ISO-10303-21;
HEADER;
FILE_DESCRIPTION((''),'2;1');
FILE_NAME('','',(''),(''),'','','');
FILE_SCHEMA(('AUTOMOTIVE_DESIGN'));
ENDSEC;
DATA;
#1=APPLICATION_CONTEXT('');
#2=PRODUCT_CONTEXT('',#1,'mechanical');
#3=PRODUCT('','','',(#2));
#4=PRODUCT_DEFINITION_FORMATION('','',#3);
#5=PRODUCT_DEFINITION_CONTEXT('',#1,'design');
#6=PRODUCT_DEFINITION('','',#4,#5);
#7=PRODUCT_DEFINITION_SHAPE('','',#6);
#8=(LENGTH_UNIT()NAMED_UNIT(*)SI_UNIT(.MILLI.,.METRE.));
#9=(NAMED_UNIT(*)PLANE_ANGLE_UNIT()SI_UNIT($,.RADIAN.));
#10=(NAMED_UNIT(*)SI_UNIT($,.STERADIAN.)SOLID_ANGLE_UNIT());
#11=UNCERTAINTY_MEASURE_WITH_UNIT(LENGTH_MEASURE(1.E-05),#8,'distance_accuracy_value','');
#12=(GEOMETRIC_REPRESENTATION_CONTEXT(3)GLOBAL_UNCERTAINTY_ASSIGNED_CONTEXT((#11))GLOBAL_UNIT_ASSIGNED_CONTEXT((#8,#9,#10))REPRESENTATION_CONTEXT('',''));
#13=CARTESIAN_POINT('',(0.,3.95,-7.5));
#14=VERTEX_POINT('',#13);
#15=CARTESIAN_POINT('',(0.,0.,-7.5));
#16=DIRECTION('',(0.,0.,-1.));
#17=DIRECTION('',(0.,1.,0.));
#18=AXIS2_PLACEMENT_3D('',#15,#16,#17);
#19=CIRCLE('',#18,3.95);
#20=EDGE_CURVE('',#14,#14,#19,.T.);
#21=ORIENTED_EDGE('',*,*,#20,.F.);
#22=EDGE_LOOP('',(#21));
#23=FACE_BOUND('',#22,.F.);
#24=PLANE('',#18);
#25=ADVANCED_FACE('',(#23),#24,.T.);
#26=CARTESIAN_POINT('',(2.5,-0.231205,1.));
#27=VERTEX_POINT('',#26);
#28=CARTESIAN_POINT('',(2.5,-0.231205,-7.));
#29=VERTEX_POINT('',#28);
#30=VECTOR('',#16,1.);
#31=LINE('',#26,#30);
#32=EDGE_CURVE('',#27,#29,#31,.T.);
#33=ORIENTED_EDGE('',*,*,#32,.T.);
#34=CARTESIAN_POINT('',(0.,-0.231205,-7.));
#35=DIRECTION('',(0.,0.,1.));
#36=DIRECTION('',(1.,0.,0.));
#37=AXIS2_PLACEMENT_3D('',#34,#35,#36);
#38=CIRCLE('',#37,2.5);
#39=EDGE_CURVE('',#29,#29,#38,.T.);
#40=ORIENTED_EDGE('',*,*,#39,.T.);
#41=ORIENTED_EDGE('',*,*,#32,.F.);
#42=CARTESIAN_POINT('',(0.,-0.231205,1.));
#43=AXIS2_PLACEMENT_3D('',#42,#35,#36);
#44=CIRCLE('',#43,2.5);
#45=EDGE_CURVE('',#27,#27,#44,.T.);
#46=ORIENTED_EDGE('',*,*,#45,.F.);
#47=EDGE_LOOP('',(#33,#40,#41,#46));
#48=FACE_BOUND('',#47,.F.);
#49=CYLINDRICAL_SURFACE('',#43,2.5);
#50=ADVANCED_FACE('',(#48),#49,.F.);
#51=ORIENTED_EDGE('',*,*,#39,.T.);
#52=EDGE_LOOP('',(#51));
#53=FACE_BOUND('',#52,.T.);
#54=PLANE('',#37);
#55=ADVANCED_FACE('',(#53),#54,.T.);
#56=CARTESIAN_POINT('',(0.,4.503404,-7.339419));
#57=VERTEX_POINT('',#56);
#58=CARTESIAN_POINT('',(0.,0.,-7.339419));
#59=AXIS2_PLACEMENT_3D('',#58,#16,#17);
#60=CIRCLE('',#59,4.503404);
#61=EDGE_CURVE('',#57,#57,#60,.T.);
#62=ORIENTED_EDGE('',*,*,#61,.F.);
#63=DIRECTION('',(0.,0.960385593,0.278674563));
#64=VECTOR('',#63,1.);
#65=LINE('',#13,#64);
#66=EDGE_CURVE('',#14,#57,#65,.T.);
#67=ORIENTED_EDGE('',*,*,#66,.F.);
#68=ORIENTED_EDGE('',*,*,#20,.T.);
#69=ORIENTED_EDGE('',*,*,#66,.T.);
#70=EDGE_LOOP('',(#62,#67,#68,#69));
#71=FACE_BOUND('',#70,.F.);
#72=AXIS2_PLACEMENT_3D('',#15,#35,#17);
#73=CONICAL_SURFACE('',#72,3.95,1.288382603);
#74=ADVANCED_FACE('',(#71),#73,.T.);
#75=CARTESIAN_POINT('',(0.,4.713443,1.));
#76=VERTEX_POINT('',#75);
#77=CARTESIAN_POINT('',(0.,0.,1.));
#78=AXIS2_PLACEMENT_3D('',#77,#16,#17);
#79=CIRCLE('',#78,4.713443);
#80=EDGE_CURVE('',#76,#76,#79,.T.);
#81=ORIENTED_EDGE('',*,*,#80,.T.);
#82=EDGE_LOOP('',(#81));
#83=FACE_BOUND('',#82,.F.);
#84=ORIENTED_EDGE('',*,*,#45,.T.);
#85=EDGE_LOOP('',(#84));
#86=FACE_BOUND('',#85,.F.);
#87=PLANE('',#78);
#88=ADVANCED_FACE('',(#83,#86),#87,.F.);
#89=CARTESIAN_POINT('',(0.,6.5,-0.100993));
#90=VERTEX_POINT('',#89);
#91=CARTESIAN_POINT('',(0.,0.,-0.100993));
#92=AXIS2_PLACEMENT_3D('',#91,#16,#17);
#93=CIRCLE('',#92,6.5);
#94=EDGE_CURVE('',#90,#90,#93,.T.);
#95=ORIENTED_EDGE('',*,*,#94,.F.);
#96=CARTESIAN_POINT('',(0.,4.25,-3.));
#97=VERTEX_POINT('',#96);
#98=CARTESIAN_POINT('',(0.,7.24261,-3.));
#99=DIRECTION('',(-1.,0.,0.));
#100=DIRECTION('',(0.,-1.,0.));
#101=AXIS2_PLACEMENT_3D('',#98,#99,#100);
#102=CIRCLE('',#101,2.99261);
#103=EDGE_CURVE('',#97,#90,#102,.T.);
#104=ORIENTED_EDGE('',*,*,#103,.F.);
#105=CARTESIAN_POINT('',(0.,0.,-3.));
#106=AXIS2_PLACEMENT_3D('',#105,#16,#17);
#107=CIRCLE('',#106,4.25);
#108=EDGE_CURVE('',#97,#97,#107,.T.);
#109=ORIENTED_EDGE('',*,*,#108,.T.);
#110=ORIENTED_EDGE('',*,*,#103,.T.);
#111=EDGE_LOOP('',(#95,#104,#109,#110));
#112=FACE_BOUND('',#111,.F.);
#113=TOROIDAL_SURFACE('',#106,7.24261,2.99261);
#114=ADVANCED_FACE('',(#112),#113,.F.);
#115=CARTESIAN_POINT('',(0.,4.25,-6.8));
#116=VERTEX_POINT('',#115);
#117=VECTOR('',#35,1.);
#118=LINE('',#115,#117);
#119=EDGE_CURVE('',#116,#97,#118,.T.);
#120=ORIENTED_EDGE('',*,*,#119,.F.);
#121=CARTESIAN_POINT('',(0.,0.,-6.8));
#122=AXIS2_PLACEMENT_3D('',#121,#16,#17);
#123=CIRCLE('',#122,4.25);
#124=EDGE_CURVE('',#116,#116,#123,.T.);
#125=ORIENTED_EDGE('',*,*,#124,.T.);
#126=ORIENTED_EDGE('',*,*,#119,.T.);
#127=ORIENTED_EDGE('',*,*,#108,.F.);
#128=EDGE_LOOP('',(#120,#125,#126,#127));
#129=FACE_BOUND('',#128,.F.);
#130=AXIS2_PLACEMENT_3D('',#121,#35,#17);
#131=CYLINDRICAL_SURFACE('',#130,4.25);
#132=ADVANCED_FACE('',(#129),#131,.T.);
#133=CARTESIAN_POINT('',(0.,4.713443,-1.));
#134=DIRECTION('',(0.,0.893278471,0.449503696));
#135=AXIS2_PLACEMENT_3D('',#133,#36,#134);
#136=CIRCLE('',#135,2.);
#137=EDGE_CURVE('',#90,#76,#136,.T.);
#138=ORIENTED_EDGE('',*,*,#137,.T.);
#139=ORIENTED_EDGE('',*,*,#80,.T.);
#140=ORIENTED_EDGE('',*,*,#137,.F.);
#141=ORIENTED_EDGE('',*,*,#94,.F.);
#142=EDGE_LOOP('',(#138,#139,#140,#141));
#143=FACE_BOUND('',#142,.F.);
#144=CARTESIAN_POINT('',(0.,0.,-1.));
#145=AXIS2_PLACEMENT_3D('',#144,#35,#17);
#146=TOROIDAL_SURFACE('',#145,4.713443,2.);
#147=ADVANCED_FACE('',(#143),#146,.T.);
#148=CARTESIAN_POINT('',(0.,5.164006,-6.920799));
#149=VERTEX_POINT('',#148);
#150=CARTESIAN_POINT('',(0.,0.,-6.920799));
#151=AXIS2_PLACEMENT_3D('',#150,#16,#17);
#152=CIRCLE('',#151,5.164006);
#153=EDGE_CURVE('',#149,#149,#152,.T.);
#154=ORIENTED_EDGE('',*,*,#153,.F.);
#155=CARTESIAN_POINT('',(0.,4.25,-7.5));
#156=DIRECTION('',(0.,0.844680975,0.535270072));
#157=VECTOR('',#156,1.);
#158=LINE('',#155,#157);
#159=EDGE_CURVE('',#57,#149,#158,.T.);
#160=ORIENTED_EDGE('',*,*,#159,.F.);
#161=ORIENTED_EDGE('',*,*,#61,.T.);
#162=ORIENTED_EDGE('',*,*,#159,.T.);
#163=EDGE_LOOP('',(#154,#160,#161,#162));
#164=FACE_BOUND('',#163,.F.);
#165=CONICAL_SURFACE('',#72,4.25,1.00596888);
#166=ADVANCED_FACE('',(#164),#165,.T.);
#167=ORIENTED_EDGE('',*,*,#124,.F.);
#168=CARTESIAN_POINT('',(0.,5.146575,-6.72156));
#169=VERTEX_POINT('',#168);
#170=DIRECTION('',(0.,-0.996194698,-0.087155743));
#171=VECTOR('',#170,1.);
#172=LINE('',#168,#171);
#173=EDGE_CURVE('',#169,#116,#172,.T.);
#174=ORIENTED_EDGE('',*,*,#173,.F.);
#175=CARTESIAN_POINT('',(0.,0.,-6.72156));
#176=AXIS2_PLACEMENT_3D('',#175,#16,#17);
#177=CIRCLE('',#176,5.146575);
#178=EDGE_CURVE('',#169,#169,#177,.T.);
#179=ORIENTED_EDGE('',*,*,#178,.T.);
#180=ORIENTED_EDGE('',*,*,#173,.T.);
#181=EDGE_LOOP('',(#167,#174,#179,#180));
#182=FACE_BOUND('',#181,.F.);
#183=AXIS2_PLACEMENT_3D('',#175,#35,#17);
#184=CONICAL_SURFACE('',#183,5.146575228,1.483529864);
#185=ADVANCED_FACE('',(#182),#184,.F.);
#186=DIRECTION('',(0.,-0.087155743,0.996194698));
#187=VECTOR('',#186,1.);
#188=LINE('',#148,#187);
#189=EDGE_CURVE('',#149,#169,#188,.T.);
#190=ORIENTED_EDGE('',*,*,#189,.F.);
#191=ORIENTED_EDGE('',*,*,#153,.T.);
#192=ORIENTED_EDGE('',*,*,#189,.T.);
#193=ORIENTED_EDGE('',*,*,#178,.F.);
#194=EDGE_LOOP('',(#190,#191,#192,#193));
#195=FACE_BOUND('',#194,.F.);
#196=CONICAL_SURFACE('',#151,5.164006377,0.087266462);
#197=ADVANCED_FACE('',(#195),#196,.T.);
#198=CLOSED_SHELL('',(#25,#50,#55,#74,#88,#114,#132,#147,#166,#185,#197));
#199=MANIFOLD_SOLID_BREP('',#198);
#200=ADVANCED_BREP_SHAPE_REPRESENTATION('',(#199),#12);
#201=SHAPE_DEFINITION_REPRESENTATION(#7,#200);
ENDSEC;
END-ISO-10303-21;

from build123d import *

# Parameters (mm, degrees)
F2_SIZE  = 0.3
F4_R     = 2.5
F5_DEPTH = 8


# Not quite as in the source:
# - a fillet or chamfer that OpenCascade refuses, or shapes differently, is made with other operations: its cross-section is extruded or revolved along the edge and cut away or added


with BuildPart() as f1:
    # F0 (on Right) → F1 (revolve)
    with BuildSketch(Plane.YZ):
        with BuildLine():
            Line((4.25, -6.8), (4.25, -3))
            ThreePointArc((4.25, -3), (4.878497412, -1.1651468819), (6.5, -0.1009926077))
            Line((6.5, -0.1009926077), (6.5, 1))
            Line((6.5, 1), (0, 1))
            Line((0, 1), (0, 0))
            Line((0, 0), (0, -7.5))
            Line((0, -7.5), (4.25, -7.5))
            Line((4.25, -7.5), (5.1640063768, -6.9207987711))
            Line((5.1640063768, -6.9207987711), (5.1465752283, -6.7215598315))
            Line((5.1465752283, -6.7215598315), (4.25, -6.8))
        make_face()
    revolve(axis=Axis((0, 0, -3.75), (0, 0, -1)))

    # F2
    f2_edges = [f1.edges().sort_by_distance(p)[0] for p in [
        (0, -4.25, -7.5),
    ]]
    chamfer(f2_edges, length=F2_SIZE)

    # F3: fillet of radius 2 on 1 edges, made by hand

    # F3_s1 → F3_t2 (revolve, cut)
    with BuildSketch(Plane.YZ):
        with BuildLine():
            ThreePointArc((6.5, -0.1009926077), (5.7627250062, 0.702647172), (4.7134430575, 1))
            Line((4.7134430575, 1), (6.5, 1))
            Line((6.5, 1), (6.5, -0.1009926077))
        make_face()
    revolve(axis=Axis((0, 0, 1), (0, 0, -1)), mode=Mode.SUBTRACT)

    # F4 (on face) → F5 (cut)
    with BuildSketch(Plane.XY.offset(1)):
        with Locations((0, -0.2312049229)):
            Circle(F4_R)
    extrude(amount=-F5_DEPTH, mode=Mode.SUBTRACT)


solid = f1.part
